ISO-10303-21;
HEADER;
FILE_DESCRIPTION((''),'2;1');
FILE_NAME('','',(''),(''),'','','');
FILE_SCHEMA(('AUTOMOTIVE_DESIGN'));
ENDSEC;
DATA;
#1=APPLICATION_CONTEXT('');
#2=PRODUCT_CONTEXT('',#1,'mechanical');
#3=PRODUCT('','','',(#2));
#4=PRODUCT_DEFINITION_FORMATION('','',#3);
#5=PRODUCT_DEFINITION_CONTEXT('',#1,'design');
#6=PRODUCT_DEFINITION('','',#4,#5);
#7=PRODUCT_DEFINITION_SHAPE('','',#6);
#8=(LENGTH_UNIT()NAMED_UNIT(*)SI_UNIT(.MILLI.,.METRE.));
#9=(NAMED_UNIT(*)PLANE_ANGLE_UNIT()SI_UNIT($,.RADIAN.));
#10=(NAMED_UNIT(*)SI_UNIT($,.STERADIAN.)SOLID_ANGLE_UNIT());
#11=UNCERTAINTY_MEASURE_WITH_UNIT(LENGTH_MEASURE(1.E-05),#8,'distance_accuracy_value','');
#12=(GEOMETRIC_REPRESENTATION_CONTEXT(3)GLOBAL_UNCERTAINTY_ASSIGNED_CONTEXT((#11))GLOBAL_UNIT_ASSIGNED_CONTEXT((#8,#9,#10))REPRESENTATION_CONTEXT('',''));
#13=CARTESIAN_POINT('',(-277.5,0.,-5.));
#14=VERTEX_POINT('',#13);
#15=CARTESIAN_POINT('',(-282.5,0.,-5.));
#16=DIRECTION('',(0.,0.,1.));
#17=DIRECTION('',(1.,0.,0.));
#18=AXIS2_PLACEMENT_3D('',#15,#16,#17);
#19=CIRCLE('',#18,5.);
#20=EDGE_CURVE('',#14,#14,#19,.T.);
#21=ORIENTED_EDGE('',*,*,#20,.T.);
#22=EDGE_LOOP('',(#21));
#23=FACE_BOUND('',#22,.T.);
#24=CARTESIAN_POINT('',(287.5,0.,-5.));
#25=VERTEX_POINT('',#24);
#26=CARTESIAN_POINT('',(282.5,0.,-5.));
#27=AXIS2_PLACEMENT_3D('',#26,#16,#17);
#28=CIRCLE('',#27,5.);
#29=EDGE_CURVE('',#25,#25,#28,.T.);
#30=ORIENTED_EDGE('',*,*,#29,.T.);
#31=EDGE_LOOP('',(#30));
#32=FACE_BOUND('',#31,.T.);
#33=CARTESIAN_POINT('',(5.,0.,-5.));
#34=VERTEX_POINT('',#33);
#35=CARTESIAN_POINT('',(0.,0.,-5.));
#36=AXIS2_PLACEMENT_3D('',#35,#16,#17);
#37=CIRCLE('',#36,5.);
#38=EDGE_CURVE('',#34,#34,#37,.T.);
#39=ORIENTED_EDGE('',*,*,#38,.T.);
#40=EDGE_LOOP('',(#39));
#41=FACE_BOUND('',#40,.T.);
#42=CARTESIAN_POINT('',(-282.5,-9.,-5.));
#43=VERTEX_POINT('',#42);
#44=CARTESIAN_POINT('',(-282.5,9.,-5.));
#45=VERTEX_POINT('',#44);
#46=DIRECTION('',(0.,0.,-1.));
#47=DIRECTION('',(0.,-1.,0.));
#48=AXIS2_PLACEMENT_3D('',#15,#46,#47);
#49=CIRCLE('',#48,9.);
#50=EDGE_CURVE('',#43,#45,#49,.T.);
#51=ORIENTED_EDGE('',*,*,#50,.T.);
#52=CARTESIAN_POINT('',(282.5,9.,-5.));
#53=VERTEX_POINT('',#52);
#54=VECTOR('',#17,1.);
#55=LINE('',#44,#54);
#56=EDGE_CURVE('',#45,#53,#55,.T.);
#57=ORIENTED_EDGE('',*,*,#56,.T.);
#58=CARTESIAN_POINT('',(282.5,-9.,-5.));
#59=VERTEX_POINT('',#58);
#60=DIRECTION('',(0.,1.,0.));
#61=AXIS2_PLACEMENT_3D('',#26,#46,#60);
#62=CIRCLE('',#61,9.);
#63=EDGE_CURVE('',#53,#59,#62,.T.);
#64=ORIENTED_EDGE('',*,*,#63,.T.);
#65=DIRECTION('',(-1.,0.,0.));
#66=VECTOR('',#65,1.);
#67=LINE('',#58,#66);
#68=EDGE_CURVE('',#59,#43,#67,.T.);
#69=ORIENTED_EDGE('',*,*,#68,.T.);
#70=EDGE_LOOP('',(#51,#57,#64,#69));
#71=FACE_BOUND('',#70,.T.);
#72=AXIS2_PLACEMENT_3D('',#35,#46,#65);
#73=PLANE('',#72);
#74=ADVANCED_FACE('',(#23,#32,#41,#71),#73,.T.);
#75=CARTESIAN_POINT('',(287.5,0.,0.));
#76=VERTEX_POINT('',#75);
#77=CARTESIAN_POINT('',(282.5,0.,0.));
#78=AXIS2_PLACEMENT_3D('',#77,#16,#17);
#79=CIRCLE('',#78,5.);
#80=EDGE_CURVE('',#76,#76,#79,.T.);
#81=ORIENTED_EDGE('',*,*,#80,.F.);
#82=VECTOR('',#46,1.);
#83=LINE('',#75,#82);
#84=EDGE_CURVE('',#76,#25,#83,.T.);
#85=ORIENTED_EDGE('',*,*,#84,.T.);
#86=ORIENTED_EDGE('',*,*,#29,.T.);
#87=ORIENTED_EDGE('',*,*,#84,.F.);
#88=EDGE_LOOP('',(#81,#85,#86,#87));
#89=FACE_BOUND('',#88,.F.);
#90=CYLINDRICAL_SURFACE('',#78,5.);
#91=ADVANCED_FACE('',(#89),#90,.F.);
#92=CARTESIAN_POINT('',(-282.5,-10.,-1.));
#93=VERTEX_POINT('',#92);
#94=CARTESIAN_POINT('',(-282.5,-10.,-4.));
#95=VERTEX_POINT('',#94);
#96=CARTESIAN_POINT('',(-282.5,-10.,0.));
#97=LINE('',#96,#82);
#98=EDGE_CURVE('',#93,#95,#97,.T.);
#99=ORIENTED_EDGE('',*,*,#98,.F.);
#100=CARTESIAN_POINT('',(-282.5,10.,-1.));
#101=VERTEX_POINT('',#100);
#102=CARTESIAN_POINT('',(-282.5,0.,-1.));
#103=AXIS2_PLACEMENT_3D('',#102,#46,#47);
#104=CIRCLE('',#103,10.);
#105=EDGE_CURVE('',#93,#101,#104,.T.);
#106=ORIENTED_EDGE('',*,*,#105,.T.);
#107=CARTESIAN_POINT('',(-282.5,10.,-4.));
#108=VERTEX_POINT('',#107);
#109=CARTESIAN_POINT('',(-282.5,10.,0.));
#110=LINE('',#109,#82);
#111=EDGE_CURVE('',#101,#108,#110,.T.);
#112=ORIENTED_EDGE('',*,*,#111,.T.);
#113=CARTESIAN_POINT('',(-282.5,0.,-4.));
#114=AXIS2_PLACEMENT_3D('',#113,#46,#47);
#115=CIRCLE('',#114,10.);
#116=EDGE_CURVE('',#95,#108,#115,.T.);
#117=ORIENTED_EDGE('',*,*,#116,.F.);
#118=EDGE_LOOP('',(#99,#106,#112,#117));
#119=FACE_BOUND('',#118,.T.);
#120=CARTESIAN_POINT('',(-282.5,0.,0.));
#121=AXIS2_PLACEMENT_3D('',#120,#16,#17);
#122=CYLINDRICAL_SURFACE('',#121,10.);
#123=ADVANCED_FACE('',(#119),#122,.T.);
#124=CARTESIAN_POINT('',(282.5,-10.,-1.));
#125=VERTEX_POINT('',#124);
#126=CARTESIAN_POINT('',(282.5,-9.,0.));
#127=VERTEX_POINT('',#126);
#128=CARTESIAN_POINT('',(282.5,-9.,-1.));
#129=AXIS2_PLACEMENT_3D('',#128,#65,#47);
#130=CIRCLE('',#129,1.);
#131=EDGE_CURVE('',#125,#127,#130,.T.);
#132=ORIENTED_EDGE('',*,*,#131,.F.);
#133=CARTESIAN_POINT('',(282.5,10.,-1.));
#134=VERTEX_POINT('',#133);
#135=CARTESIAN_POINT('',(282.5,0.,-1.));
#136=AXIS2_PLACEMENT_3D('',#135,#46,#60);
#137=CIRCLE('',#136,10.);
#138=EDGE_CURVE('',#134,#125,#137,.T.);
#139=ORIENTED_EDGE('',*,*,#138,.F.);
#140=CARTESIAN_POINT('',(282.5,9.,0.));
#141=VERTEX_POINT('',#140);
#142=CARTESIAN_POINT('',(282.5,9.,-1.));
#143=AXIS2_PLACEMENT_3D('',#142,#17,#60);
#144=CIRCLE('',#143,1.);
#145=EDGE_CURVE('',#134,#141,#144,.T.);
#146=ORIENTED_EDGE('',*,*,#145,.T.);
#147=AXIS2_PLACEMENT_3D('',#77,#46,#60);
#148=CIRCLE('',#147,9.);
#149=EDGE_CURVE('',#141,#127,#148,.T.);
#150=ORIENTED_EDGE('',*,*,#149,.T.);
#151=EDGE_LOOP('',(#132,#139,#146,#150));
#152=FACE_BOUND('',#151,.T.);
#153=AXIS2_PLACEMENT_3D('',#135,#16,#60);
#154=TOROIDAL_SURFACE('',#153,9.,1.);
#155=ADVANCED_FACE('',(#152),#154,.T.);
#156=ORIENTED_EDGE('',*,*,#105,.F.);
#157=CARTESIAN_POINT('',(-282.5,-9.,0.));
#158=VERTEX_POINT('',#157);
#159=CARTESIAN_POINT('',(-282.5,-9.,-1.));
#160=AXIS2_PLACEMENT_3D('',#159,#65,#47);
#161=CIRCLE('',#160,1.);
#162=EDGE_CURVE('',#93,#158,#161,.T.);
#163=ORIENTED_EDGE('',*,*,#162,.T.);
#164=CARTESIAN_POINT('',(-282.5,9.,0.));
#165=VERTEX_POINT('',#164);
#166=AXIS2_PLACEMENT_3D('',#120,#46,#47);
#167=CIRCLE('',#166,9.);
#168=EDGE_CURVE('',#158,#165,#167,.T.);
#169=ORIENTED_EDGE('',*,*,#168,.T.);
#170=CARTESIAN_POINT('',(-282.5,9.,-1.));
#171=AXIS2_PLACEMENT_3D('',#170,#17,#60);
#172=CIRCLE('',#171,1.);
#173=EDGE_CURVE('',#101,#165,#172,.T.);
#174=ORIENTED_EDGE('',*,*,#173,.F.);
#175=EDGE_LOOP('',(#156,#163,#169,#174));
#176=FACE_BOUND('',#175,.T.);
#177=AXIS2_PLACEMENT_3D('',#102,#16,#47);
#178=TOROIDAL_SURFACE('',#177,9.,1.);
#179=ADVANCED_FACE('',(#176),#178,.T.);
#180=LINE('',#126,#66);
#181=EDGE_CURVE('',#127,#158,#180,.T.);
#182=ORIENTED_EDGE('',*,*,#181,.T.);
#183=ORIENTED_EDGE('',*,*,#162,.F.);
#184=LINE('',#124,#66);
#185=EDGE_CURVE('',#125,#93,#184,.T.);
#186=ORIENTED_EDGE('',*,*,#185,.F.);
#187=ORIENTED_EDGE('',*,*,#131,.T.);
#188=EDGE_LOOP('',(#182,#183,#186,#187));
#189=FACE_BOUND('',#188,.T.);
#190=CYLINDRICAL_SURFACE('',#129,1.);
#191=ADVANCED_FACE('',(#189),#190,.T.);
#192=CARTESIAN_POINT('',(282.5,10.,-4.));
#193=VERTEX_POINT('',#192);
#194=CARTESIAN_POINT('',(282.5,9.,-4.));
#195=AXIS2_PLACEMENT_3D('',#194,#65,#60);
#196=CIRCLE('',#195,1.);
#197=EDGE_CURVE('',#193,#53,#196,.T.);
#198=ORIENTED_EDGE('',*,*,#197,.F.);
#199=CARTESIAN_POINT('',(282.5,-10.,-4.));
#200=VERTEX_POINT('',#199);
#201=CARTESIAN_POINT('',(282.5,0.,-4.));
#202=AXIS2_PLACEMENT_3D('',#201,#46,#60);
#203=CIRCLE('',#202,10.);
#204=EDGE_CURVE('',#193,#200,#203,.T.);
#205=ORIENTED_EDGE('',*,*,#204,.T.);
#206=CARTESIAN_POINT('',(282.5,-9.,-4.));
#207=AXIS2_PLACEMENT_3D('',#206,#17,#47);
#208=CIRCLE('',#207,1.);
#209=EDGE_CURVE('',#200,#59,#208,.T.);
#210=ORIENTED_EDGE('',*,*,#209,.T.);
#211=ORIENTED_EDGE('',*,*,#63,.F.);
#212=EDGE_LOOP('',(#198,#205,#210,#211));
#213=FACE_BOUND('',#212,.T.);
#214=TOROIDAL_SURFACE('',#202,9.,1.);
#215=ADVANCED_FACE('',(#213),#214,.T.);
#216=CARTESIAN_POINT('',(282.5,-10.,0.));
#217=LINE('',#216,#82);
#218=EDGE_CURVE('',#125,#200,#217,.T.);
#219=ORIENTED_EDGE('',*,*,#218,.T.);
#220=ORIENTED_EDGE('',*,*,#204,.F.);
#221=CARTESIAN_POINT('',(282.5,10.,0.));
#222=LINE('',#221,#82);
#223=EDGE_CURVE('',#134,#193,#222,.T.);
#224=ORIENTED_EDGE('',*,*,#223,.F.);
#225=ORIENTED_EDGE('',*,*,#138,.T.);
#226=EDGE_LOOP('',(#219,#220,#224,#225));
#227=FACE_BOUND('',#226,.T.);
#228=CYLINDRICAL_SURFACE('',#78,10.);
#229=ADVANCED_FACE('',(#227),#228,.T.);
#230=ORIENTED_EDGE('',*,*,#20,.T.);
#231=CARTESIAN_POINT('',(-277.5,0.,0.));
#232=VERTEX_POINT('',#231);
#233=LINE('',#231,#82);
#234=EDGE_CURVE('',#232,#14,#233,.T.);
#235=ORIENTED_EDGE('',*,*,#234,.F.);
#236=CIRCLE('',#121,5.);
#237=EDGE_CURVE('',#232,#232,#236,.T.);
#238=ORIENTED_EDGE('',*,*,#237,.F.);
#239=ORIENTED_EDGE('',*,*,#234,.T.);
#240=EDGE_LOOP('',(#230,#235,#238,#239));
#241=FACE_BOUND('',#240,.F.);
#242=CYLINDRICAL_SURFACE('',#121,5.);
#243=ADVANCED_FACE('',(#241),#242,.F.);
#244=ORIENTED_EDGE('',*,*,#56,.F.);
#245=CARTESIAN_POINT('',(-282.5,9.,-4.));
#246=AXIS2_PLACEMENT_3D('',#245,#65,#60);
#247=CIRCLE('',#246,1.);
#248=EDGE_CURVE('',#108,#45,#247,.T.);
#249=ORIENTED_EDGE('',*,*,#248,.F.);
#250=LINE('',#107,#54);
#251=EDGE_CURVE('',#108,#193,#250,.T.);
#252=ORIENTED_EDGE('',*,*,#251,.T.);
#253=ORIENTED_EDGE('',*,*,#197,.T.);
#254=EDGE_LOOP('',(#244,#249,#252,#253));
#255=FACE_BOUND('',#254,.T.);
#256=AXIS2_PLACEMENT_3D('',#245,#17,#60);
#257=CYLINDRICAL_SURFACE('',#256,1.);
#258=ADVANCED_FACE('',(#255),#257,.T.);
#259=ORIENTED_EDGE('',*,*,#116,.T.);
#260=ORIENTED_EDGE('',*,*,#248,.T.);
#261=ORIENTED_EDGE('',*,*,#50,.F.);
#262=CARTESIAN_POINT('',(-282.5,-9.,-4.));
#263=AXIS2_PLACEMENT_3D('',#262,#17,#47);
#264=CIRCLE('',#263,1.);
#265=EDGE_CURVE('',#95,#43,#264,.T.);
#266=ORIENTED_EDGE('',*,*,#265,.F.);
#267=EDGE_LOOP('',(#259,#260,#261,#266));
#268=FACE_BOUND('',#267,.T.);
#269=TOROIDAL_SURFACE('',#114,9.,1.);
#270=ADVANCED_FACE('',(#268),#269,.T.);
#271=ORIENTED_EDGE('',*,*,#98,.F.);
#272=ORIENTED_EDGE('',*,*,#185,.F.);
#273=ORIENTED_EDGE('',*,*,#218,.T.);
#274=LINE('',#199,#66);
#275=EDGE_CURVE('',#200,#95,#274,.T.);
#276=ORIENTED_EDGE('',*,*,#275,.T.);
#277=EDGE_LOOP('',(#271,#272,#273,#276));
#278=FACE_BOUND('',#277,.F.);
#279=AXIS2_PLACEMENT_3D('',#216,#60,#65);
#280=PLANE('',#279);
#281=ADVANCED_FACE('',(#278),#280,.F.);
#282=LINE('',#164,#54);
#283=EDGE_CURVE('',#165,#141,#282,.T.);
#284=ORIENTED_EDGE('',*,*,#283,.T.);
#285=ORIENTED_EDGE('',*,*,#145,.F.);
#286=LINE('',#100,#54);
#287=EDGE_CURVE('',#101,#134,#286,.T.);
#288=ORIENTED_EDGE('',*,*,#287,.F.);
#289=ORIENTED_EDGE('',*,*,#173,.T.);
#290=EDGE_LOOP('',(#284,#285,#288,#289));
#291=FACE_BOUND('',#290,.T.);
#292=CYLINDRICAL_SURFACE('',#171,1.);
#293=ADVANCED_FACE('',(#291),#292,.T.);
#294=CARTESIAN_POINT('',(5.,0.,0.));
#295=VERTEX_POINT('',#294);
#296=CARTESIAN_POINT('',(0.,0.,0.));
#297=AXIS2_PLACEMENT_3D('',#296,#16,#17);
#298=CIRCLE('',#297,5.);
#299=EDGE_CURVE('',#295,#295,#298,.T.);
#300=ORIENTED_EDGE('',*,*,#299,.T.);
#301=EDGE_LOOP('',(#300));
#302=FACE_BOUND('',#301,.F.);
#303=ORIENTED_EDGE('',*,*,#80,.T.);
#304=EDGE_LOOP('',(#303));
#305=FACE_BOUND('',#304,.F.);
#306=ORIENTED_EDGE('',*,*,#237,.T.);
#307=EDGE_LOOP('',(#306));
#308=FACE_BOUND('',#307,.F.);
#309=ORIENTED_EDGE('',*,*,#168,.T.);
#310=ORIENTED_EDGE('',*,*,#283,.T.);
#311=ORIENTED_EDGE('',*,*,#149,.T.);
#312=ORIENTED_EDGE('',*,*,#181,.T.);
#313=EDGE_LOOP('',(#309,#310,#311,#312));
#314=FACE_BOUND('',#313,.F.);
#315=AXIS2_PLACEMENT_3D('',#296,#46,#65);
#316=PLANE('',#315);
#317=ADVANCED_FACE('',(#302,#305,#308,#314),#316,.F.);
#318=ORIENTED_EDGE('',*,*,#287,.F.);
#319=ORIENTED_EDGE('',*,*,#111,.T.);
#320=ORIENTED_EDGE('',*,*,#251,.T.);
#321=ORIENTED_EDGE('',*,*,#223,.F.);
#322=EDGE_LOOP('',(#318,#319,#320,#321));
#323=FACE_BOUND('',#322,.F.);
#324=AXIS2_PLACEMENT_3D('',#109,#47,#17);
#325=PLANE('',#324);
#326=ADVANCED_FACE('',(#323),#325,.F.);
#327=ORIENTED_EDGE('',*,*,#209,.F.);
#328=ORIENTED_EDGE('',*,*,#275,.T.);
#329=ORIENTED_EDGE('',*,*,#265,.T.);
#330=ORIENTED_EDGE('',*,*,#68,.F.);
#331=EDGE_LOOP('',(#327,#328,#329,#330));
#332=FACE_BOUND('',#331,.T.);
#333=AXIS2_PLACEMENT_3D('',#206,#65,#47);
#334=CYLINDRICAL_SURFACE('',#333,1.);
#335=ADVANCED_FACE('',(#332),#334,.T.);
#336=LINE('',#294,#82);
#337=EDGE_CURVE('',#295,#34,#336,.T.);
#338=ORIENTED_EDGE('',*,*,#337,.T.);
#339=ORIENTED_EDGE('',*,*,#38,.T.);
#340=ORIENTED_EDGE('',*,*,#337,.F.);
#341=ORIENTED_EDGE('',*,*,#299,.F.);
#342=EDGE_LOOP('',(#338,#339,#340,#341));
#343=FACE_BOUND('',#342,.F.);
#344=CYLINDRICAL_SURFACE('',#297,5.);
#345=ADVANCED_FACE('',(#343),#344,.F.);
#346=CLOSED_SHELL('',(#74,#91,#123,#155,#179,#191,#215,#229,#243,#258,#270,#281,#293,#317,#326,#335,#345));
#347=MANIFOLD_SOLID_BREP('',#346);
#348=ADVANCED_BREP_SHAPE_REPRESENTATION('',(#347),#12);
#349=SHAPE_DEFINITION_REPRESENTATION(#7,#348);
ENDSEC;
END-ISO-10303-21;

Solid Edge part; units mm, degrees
sketch "Sketch1" plane through (0, 0, 0) normal (0, 0, 1) x (1, 0, 0)
  arc A0 (-282.5, -10) -> (-282.5, 10) centre (-282.5, 0) cw
  line L0 (-282.5, 10) -> (282.5, 10)
  arc A1 (282.5, 10) -> (282.5, -10) centre (282.5, 0) cw
  line L1 (282.5, -10) -> (-282.5, -10)
  circle A2 centre (-282.5, 0) radius 5
  circle A3 centre (282.5, 0) radius 5
  circle A4 centre (0, 0) radius 5
  dimension "D1" = 565
  dimension "D2" = 20
extrude "Protrusion1" add sketch "Sketch1" against normal blind 5
fillet "Round_1" radius 1 8 edges at (0, 10, -5) (0, 10, 0) (0, -10, 0) (0, -10, -5) (-292.5, 0, 0) (-292.5, 0, -5) (292.5, 0, 0) (292.5, 0, -5)
properties material "Stainless steel"
